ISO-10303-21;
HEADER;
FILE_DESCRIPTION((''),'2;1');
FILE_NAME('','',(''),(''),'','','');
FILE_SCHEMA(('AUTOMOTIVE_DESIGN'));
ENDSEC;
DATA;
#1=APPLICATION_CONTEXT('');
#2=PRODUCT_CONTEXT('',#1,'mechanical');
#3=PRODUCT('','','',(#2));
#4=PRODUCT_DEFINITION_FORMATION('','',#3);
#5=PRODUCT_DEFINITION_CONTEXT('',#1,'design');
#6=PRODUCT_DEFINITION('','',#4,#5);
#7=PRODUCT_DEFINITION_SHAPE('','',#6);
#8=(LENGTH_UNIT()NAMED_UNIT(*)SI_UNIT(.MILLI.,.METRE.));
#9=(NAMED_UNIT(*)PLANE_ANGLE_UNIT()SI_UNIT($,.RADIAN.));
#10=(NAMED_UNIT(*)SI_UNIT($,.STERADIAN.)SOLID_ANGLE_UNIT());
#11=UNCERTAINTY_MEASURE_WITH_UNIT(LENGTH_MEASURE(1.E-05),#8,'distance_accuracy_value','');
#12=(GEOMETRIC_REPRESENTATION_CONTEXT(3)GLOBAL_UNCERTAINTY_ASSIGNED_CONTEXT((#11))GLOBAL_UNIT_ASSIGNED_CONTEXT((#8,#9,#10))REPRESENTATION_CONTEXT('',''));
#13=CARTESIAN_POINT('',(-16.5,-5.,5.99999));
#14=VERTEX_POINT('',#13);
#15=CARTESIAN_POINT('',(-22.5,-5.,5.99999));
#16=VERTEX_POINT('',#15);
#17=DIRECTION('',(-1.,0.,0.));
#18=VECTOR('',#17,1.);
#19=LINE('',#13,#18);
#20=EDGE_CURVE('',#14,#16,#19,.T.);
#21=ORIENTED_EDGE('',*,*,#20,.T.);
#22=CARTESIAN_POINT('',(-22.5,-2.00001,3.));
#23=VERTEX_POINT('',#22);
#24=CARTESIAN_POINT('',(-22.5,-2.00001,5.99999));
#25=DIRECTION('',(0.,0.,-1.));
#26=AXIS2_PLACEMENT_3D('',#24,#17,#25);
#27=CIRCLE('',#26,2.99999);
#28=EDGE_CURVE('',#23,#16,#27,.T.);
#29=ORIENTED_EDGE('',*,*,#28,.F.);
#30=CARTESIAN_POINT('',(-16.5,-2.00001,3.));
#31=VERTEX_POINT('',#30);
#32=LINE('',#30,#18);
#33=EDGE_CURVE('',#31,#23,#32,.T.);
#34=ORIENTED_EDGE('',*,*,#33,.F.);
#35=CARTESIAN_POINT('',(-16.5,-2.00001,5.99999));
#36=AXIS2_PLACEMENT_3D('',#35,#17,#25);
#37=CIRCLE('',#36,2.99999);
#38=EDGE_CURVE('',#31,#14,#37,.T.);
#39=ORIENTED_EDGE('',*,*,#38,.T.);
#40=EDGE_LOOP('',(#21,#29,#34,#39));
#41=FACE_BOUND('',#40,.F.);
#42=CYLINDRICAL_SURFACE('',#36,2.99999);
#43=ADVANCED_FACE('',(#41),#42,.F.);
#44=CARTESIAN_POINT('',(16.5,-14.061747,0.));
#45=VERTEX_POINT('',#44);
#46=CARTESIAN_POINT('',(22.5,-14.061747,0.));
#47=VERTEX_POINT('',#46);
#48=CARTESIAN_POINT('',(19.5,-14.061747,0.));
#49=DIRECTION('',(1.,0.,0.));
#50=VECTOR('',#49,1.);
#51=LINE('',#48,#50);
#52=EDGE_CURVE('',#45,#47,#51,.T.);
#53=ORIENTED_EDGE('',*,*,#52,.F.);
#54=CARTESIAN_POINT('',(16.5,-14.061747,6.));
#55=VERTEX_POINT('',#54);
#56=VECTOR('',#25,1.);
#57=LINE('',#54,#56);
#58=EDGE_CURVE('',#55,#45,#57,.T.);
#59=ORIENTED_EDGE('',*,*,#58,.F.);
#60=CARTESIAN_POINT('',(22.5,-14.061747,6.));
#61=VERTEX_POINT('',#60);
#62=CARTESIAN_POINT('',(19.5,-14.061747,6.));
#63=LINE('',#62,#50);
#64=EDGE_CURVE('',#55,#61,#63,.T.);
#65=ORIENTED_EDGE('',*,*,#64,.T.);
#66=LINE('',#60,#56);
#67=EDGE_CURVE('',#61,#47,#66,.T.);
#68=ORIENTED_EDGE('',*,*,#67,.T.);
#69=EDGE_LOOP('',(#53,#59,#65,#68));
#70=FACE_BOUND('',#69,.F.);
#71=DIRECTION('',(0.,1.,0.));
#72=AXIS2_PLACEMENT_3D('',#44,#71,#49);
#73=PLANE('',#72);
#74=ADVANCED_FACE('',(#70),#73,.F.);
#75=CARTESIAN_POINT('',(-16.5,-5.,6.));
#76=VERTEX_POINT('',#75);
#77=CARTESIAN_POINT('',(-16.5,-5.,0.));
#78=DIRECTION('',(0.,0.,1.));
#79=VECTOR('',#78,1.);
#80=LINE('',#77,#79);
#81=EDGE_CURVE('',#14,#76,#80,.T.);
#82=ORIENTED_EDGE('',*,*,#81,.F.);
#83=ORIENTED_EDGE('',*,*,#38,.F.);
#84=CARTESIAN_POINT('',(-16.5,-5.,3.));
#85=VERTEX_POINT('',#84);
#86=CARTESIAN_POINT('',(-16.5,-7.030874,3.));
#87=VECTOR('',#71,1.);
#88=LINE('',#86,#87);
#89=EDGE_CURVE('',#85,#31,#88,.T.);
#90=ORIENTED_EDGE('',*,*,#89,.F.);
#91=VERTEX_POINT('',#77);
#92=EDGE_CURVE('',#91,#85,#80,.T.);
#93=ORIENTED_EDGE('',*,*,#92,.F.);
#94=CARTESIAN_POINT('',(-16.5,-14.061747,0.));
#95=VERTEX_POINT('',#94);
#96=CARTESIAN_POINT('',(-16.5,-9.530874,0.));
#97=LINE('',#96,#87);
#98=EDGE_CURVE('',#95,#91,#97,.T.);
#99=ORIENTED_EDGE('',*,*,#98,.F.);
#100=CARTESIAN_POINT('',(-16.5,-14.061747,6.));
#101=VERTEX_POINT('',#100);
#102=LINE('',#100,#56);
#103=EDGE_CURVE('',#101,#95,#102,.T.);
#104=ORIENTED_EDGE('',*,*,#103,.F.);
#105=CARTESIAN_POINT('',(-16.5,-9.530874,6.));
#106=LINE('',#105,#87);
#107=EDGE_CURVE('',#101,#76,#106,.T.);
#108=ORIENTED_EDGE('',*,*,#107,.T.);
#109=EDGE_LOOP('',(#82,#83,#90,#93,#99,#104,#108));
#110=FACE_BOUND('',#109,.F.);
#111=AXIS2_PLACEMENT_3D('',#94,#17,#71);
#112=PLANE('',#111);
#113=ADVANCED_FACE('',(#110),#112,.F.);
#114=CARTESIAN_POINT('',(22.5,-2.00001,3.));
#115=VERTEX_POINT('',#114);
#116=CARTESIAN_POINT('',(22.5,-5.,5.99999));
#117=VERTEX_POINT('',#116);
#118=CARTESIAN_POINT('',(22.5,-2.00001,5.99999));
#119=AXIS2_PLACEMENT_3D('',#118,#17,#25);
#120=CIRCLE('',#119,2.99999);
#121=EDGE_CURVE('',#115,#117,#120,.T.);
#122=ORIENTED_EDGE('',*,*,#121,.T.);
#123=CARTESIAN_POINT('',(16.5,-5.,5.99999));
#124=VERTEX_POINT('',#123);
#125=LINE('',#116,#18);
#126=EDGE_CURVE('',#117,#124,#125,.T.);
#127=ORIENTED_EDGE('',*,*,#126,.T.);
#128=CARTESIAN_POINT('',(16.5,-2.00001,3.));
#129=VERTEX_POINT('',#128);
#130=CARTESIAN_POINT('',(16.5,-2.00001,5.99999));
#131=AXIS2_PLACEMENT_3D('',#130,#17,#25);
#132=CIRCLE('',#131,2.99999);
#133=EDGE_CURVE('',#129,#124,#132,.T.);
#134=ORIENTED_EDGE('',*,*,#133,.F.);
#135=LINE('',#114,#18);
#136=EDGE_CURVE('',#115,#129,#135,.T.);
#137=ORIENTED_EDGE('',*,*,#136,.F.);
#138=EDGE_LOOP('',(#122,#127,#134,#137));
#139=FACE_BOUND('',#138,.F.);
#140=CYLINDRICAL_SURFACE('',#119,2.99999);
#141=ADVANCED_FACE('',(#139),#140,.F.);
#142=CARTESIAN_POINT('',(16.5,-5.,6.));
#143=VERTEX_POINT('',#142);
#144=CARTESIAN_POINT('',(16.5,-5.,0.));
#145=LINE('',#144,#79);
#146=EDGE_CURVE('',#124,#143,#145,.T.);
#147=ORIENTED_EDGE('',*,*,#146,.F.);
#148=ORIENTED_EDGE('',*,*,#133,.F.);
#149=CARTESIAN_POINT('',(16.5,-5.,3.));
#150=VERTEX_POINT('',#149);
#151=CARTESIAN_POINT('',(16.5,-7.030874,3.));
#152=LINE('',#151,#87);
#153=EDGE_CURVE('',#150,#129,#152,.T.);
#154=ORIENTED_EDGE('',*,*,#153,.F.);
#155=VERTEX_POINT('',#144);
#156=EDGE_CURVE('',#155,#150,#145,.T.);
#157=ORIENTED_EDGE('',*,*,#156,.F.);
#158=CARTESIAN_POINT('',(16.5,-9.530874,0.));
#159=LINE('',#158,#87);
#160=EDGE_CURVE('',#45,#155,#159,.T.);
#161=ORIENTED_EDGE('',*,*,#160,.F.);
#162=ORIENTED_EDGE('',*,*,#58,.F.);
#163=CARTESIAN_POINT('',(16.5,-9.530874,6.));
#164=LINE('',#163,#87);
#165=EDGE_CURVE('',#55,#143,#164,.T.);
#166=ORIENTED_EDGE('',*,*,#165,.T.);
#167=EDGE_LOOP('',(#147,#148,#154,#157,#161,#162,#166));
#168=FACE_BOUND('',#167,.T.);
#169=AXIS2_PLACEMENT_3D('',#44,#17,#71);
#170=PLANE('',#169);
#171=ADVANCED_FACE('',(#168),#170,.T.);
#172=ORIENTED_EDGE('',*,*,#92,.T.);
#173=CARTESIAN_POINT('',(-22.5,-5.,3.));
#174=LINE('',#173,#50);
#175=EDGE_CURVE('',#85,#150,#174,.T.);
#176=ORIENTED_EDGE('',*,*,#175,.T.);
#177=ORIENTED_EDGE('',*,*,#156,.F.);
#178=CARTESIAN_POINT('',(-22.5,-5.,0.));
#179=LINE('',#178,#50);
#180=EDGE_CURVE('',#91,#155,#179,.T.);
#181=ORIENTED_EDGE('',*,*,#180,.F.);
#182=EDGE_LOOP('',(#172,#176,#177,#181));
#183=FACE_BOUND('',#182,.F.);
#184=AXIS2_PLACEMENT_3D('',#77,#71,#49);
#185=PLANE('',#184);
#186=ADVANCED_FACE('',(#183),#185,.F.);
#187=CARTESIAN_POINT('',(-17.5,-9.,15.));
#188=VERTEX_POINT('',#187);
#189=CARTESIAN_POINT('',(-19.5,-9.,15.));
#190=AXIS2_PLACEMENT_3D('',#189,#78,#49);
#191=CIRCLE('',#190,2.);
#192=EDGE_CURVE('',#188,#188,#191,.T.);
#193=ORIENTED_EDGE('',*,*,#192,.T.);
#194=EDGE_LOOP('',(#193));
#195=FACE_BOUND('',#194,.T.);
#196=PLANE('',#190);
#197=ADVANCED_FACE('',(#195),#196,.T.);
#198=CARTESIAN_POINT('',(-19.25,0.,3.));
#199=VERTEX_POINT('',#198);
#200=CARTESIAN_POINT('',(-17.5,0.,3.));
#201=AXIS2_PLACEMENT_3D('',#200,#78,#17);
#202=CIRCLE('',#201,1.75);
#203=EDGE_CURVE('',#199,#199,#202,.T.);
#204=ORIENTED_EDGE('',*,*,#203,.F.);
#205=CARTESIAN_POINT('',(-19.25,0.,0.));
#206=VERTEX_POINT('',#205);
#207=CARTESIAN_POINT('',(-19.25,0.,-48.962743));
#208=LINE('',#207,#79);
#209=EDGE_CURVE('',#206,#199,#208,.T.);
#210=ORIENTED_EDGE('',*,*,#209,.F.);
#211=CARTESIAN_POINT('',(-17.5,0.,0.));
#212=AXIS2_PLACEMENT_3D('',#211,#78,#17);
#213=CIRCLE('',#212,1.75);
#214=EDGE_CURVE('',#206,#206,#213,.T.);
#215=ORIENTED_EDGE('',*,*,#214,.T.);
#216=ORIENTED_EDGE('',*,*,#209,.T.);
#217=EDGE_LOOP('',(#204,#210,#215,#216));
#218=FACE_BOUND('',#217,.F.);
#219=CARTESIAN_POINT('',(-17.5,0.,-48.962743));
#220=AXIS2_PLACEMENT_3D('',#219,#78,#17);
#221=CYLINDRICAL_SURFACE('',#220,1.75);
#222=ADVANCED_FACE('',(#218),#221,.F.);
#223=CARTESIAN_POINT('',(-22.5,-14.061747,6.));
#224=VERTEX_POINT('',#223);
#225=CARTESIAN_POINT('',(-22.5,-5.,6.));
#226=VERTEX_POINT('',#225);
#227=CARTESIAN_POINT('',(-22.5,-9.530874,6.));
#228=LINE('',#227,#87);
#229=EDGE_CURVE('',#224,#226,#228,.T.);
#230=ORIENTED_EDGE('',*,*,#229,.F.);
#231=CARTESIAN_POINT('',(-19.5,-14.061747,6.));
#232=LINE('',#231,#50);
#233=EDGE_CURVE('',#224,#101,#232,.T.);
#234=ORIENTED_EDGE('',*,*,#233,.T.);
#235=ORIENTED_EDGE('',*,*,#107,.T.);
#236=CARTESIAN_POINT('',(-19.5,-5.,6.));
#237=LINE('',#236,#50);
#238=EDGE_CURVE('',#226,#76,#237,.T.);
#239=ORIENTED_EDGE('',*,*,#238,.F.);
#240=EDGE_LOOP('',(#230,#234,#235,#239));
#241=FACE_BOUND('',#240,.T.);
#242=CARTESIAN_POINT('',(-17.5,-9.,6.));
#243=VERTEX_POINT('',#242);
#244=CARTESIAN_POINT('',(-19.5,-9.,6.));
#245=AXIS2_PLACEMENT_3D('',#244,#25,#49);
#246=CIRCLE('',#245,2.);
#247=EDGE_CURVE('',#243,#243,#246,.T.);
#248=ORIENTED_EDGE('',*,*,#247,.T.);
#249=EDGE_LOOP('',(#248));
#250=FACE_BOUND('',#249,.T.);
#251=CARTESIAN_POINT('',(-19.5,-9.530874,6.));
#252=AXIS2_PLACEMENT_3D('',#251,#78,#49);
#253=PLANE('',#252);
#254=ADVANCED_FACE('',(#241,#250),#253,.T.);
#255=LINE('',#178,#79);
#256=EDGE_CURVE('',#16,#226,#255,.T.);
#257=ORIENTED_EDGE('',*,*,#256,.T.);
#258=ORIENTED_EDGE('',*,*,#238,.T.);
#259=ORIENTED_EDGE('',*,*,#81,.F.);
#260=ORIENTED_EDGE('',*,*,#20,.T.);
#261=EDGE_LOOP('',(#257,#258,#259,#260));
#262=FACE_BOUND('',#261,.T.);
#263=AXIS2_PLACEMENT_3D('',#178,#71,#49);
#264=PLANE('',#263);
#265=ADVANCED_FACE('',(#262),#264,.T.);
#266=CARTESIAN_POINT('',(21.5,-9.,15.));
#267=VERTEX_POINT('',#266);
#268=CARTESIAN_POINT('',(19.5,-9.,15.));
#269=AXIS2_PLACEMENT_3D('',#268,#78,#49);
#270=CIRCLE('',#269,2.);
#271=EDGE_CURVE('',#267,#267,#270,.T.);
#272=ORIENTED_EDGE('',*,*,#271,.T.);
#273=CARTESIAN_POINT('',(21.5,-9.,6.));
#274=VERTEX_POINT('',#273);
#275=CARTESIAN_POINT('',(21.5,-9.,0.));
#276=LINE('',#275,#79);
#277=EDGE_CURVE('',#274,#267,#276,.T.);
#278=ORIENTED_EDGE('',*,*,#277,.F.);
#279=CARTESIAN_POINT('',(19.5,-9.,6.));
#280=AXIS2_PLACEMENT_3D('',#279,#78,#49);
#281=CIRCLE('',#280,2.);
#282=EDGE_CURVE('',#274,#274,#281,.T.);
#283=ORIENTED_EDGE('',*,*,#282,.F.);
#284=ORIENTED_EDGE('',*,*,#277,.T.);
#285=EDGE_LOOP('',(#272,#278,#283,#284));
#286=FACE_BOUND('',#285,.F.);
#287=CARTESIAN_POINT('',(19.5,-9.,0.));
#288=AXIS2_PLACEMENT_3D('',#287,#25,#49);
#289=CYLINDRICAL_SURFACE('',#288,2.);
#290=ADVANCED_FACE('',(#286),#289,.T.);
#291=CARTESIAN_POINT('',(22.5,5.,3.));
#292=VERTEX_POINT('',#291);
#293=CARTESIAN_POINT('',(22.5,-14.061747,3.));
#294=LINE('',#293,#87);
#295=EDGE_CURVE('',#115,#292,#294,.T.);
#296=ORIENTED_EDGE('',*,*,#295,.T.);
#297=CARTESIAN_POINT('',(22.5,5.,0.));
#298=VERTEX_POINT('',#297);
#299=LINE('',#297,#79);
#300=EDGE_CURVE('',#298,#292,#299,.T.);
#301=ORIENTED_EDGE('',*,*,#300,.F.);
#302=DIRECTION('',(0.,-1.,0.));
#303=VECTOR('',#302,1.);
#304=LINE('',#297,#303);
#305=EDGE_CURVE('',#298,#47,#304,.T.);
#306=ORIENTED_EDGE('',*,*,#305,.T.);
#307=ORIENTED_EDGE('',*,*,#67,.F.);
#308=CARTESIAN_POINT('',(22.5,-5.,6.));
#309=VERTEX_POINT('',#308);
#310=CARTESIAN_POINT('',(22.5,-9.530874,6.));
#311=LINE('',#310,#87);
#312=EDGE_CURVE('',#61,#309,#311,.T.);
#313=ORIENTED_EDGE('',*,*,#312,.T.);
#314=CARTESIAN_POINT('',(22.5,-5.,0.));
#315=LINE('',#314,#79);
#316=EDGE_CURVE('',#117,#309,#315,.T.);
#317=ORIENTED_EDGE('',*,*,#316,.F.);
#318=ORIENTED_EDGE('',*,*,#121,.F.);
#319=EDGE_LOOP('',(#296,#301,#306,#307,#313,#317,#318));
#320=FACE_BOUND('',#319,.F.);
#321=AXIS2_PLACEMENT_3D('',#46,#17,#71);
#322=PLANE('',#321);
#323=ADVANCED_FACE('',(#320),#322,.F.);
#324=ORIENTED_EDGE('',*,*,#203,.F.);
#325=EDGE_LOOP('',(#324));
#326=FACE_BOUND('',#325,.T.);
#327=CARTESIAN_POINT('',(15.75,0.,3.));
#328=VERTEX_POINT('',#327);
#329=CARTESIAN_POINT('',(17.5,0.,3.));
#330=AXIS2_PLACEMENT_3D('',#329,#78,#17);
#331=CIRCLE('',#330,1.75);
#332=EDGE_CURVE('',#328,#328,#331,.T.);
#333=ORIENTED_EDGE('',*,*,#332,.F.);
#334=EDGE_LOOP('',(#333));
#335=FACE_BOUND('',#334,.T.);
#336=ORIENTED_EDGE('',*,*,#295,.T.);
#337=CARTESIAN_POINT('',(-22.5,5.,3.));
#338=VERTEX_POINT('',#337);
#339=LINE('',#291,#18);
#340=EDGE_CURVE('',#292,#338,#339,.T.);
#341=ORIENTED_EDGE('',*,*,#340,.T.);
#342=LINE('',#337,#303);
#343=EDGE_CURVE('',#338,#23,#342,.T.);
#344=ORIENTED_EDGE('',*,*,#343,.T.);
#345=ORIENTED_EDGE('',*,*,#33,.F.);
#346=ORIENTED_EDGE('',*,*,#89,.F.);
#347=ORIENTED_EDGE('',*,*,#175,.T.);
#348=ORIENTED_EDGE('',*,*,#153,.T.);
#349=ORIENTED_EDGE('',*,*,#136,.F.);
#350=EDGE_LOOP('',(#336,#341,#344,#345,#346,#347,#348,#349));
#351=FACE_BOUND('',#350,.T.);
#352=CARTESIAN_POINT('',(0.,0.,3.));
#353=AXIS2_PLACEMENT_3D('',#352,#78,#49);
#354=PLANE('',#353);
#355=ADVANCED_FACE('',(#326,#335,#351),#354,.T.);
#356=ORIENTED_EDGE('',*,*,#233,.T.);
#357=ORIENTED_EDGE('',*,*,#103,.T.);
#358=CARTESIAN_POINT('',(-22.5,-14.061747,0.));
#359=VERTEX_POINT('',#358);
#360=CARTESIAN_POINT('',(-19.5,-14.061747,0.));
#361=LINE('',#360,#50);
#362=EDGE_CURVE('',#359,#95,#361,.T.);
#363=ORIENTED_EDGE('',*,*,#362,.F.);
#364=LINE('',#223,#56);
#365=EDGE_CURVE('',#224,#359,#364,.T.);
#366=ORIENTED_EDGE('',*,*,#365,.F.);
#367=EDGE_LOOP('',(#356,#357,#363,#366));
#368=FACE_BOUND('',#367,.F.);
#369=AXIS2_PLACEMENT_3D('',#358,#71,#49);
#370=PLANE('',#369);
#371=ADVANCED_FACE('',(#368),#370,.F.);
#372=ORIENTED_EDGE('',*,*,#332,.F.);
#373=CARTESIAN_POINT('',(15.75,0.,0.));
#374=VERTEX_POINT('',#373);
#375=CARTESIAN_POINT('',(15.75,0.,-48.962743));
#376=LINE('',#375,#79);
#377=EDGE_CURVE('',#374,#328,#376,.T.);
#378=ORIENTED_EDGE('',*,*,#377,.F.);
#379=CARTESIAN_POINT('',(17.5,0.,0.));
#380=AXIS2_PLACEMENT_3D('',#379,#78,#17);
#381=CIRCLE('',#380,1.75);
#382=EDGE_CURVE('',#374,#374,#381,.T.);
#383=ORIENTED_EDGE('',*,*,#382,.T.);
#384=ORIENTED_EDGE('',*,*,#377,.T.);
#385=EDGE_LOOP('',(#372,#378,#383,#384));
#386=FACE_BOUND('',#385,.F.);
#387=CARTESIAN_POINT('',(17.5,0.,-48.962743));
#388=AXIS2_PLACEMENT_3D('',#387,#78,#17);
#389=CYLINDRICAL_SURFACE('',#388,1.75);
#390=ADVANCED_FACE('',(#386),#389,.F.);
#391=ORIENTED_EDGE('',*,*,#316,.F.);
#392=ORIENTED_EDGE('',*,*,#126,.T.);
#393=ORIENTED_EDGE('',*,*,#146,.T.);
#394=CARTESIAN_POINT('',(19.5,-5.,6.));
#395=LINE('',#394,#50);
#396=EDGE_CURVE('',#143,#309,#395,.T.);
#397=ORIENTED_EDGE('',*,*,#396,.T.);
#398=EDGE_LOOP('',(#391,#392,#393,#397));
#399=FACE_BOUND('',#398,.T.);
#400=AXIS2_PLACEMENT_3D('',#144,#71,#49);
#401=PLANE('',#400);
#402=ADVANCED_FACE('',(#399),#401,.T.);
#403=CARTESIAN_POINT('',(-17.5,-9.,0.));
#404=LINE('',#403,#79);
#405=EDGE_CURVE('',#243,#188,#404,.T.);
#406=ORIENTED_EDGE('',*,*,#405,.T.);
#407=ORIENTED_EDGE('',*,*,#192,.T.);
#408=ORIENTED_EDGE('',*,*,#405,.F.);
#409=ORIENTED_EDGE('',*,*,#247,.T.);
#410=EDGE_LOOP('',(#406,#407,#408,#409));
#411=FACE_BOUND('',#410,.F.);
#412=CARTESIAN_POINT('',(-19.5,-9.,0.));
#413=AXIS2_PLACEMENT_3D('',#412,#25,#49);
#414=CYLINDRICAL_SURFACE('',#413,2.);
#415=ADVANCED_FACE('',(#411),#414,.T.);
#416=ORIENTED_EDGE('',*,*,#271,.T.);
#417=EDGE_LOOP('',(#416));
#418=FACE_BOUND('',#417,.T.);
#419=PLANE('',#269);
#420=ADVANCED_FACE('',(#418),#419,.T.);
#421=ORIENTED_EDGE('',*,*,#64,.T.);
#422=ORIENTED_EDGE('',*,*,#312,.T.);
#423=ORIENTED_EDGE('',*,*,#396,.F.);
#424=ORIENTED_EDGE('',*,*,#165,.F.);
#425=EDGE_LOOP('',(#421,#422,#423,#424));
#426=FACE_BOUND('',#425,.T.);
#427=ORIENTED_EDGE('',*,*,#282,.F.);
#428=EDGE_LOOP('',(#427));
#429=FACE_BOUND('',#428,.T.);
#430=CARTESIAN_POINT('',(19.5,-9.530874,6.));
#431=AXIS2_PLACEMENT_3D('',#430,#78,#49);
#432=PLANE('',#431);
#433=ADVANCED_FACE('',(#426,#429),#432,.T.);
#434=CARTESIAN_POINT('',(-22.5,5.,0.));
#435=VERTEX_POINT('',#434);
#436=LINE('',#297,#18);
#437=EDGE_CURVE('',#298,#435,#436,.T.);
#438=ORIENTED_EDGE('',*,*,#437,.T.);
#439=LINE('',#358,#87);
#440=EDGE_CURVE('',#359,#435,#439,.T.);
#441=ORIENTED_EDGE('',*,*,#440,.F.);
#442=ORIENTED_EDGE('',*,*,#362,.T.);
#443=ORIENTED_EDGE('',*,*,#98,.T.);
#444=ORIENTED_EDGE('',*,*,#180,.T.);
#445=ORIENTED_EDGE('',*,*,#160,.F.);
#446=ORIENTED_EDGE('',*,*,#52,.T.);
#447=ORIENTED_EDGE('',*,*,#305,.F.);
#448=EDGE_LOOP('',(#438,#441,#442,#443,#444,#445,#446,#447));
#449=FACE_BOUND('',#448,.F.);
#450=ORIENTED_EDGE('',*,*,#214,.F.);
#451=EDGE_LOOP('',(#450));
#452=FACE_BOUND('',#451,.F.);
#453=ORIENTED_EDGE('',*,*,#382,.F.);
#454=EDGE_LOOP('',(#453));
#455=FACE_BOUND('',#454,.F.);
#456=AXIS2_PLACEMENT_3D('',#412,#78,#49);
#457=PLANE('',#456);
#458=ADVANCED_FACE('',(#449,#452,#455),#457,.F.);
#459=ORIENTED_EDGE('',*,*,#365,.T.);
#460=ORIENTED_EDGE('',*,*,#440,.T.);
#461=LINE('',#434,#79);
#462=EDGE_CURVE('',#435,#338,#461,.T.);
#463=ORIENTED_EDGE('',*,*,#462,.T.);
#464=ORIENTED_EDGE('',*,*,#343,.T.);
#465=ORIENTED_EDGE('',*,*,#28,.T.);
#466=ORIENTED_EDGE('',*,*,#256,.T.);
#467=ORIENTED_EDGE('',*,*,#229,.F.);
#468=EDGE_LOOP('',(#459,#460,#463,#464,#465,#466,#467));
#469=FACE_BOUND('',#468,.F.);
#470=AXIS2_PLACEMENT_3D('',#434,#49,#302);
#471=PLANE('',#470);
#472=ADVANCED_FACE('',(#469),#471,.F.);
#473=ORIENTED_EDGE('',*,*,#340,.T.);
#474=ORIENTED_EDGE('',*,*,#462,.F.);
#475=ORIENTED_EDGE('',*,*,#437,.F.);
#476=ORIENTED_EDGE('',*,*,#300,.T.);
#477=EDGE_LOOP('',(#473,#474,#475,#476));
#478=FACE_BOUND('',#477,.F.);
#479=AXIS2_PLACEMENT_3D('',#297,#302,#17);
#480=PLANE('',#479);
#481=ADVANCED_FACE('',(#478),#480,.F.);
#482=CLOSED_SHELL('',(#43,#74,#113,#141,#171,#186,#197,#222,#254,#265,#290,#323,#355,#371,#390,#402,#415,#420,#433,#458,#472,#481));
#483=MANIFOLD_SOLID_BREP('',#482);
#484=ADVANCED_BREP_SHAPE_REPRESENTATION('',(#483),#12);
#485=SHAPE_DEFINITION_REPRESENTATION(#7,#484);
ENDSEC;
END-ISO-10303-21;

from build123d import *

# Parameters (mm, degrees)
F0_W     = 6
F0_H     = 9.0617471188
F0_R     = 2
F1_DEPTH = 3
F2_D     = 3.5
F3_DEPTH = 15
F4_DEPTH = 6
F5_R     = 2.99999


# Not quite as in the source:
# - a fillet or chamfer is up to 0.001 mm smaller than in the source, because OpenCascade refuses the exact size
# - a feature names something its author has since deleted; it is built from what else it names


with BuildPart() as f1:
    # F0 (on Top) → F1 (new body)
    with BuildSketch(Plane.XY):
        Polygon((22.5, 5), (-22.5, 5), (-22.5, -5), (-16.5, -5), (16.5, -5), (22.5, -5), align=None)
        with Locations((-19.5, -9.5308735594)):
            Rectangle(F0_W, F0_H)
        with Locations((-19.5, -9)):
            Circle(F0_R, mode=Mode.SUBTRACT)
        with Locations((19.5, -9.5308735594)):
            Rectangle(F0_W, F0_H)
        with Locations((19.5, -9)):
            Circle(F0_R, mode=Mode.SUBTRACT)
        with Locations((-19.5, -9)):
            Circle(F0_R)
        with Locations((19.5, -9)):
            Circle(F0_R)
    extrude(amount=F1_DEPTH)

    # F2 (through all)
    with Locations(Plane(origin=(0, 0, 0), x_dir=(1, 0, 0), z_dir=(0, 0, -1))):
        with Locations((-17.5, 0), (17.5, 0)):
            Hole(F2_D / 2)

    # F0 (on Top) → F3 (join)
    with BuildSketch(Plane.XY):
        with Locations((-19.5, -9)):
            Circle(F0_R)
        with Locations((19.5, -9)):
            Circle(F0_R)
    extrude(amount=F3_DEPTH)

    # F0 (on Top) → F4 (join)
    with BuildSketch(Plane.XY):
        with Locations((-19.5, -9.5308735594)):
            Rectangle(F0_W, F0_H)
        with Locations((-19.5, -9)):
            Circle(F0_R, mode=Mode.SUBTRACT)
        with Locations((19.5, -9.5308735594)):
            Rectangle(F0_W, F0_H)
        with Locations((19.5, -9)):
            Circle(F0_R, mode=Mode.SUBTRACT)
        with Locations((-19.5, -9)):
            Circle(F0_R)
    extrude(amount=F4_DEPTH)

    # F5 (radius 3 in the source; OpenCascade refuses exactly that, so slightly less here)
    f5_edges = [f1.edges().sort_by_distance(p)[0] for p in [
        (-19.5, -5, 3),
        (19.5, -5, 3),
    ]]
    fillet(f5_edges, radius=F5_R)


solid = f1.part
